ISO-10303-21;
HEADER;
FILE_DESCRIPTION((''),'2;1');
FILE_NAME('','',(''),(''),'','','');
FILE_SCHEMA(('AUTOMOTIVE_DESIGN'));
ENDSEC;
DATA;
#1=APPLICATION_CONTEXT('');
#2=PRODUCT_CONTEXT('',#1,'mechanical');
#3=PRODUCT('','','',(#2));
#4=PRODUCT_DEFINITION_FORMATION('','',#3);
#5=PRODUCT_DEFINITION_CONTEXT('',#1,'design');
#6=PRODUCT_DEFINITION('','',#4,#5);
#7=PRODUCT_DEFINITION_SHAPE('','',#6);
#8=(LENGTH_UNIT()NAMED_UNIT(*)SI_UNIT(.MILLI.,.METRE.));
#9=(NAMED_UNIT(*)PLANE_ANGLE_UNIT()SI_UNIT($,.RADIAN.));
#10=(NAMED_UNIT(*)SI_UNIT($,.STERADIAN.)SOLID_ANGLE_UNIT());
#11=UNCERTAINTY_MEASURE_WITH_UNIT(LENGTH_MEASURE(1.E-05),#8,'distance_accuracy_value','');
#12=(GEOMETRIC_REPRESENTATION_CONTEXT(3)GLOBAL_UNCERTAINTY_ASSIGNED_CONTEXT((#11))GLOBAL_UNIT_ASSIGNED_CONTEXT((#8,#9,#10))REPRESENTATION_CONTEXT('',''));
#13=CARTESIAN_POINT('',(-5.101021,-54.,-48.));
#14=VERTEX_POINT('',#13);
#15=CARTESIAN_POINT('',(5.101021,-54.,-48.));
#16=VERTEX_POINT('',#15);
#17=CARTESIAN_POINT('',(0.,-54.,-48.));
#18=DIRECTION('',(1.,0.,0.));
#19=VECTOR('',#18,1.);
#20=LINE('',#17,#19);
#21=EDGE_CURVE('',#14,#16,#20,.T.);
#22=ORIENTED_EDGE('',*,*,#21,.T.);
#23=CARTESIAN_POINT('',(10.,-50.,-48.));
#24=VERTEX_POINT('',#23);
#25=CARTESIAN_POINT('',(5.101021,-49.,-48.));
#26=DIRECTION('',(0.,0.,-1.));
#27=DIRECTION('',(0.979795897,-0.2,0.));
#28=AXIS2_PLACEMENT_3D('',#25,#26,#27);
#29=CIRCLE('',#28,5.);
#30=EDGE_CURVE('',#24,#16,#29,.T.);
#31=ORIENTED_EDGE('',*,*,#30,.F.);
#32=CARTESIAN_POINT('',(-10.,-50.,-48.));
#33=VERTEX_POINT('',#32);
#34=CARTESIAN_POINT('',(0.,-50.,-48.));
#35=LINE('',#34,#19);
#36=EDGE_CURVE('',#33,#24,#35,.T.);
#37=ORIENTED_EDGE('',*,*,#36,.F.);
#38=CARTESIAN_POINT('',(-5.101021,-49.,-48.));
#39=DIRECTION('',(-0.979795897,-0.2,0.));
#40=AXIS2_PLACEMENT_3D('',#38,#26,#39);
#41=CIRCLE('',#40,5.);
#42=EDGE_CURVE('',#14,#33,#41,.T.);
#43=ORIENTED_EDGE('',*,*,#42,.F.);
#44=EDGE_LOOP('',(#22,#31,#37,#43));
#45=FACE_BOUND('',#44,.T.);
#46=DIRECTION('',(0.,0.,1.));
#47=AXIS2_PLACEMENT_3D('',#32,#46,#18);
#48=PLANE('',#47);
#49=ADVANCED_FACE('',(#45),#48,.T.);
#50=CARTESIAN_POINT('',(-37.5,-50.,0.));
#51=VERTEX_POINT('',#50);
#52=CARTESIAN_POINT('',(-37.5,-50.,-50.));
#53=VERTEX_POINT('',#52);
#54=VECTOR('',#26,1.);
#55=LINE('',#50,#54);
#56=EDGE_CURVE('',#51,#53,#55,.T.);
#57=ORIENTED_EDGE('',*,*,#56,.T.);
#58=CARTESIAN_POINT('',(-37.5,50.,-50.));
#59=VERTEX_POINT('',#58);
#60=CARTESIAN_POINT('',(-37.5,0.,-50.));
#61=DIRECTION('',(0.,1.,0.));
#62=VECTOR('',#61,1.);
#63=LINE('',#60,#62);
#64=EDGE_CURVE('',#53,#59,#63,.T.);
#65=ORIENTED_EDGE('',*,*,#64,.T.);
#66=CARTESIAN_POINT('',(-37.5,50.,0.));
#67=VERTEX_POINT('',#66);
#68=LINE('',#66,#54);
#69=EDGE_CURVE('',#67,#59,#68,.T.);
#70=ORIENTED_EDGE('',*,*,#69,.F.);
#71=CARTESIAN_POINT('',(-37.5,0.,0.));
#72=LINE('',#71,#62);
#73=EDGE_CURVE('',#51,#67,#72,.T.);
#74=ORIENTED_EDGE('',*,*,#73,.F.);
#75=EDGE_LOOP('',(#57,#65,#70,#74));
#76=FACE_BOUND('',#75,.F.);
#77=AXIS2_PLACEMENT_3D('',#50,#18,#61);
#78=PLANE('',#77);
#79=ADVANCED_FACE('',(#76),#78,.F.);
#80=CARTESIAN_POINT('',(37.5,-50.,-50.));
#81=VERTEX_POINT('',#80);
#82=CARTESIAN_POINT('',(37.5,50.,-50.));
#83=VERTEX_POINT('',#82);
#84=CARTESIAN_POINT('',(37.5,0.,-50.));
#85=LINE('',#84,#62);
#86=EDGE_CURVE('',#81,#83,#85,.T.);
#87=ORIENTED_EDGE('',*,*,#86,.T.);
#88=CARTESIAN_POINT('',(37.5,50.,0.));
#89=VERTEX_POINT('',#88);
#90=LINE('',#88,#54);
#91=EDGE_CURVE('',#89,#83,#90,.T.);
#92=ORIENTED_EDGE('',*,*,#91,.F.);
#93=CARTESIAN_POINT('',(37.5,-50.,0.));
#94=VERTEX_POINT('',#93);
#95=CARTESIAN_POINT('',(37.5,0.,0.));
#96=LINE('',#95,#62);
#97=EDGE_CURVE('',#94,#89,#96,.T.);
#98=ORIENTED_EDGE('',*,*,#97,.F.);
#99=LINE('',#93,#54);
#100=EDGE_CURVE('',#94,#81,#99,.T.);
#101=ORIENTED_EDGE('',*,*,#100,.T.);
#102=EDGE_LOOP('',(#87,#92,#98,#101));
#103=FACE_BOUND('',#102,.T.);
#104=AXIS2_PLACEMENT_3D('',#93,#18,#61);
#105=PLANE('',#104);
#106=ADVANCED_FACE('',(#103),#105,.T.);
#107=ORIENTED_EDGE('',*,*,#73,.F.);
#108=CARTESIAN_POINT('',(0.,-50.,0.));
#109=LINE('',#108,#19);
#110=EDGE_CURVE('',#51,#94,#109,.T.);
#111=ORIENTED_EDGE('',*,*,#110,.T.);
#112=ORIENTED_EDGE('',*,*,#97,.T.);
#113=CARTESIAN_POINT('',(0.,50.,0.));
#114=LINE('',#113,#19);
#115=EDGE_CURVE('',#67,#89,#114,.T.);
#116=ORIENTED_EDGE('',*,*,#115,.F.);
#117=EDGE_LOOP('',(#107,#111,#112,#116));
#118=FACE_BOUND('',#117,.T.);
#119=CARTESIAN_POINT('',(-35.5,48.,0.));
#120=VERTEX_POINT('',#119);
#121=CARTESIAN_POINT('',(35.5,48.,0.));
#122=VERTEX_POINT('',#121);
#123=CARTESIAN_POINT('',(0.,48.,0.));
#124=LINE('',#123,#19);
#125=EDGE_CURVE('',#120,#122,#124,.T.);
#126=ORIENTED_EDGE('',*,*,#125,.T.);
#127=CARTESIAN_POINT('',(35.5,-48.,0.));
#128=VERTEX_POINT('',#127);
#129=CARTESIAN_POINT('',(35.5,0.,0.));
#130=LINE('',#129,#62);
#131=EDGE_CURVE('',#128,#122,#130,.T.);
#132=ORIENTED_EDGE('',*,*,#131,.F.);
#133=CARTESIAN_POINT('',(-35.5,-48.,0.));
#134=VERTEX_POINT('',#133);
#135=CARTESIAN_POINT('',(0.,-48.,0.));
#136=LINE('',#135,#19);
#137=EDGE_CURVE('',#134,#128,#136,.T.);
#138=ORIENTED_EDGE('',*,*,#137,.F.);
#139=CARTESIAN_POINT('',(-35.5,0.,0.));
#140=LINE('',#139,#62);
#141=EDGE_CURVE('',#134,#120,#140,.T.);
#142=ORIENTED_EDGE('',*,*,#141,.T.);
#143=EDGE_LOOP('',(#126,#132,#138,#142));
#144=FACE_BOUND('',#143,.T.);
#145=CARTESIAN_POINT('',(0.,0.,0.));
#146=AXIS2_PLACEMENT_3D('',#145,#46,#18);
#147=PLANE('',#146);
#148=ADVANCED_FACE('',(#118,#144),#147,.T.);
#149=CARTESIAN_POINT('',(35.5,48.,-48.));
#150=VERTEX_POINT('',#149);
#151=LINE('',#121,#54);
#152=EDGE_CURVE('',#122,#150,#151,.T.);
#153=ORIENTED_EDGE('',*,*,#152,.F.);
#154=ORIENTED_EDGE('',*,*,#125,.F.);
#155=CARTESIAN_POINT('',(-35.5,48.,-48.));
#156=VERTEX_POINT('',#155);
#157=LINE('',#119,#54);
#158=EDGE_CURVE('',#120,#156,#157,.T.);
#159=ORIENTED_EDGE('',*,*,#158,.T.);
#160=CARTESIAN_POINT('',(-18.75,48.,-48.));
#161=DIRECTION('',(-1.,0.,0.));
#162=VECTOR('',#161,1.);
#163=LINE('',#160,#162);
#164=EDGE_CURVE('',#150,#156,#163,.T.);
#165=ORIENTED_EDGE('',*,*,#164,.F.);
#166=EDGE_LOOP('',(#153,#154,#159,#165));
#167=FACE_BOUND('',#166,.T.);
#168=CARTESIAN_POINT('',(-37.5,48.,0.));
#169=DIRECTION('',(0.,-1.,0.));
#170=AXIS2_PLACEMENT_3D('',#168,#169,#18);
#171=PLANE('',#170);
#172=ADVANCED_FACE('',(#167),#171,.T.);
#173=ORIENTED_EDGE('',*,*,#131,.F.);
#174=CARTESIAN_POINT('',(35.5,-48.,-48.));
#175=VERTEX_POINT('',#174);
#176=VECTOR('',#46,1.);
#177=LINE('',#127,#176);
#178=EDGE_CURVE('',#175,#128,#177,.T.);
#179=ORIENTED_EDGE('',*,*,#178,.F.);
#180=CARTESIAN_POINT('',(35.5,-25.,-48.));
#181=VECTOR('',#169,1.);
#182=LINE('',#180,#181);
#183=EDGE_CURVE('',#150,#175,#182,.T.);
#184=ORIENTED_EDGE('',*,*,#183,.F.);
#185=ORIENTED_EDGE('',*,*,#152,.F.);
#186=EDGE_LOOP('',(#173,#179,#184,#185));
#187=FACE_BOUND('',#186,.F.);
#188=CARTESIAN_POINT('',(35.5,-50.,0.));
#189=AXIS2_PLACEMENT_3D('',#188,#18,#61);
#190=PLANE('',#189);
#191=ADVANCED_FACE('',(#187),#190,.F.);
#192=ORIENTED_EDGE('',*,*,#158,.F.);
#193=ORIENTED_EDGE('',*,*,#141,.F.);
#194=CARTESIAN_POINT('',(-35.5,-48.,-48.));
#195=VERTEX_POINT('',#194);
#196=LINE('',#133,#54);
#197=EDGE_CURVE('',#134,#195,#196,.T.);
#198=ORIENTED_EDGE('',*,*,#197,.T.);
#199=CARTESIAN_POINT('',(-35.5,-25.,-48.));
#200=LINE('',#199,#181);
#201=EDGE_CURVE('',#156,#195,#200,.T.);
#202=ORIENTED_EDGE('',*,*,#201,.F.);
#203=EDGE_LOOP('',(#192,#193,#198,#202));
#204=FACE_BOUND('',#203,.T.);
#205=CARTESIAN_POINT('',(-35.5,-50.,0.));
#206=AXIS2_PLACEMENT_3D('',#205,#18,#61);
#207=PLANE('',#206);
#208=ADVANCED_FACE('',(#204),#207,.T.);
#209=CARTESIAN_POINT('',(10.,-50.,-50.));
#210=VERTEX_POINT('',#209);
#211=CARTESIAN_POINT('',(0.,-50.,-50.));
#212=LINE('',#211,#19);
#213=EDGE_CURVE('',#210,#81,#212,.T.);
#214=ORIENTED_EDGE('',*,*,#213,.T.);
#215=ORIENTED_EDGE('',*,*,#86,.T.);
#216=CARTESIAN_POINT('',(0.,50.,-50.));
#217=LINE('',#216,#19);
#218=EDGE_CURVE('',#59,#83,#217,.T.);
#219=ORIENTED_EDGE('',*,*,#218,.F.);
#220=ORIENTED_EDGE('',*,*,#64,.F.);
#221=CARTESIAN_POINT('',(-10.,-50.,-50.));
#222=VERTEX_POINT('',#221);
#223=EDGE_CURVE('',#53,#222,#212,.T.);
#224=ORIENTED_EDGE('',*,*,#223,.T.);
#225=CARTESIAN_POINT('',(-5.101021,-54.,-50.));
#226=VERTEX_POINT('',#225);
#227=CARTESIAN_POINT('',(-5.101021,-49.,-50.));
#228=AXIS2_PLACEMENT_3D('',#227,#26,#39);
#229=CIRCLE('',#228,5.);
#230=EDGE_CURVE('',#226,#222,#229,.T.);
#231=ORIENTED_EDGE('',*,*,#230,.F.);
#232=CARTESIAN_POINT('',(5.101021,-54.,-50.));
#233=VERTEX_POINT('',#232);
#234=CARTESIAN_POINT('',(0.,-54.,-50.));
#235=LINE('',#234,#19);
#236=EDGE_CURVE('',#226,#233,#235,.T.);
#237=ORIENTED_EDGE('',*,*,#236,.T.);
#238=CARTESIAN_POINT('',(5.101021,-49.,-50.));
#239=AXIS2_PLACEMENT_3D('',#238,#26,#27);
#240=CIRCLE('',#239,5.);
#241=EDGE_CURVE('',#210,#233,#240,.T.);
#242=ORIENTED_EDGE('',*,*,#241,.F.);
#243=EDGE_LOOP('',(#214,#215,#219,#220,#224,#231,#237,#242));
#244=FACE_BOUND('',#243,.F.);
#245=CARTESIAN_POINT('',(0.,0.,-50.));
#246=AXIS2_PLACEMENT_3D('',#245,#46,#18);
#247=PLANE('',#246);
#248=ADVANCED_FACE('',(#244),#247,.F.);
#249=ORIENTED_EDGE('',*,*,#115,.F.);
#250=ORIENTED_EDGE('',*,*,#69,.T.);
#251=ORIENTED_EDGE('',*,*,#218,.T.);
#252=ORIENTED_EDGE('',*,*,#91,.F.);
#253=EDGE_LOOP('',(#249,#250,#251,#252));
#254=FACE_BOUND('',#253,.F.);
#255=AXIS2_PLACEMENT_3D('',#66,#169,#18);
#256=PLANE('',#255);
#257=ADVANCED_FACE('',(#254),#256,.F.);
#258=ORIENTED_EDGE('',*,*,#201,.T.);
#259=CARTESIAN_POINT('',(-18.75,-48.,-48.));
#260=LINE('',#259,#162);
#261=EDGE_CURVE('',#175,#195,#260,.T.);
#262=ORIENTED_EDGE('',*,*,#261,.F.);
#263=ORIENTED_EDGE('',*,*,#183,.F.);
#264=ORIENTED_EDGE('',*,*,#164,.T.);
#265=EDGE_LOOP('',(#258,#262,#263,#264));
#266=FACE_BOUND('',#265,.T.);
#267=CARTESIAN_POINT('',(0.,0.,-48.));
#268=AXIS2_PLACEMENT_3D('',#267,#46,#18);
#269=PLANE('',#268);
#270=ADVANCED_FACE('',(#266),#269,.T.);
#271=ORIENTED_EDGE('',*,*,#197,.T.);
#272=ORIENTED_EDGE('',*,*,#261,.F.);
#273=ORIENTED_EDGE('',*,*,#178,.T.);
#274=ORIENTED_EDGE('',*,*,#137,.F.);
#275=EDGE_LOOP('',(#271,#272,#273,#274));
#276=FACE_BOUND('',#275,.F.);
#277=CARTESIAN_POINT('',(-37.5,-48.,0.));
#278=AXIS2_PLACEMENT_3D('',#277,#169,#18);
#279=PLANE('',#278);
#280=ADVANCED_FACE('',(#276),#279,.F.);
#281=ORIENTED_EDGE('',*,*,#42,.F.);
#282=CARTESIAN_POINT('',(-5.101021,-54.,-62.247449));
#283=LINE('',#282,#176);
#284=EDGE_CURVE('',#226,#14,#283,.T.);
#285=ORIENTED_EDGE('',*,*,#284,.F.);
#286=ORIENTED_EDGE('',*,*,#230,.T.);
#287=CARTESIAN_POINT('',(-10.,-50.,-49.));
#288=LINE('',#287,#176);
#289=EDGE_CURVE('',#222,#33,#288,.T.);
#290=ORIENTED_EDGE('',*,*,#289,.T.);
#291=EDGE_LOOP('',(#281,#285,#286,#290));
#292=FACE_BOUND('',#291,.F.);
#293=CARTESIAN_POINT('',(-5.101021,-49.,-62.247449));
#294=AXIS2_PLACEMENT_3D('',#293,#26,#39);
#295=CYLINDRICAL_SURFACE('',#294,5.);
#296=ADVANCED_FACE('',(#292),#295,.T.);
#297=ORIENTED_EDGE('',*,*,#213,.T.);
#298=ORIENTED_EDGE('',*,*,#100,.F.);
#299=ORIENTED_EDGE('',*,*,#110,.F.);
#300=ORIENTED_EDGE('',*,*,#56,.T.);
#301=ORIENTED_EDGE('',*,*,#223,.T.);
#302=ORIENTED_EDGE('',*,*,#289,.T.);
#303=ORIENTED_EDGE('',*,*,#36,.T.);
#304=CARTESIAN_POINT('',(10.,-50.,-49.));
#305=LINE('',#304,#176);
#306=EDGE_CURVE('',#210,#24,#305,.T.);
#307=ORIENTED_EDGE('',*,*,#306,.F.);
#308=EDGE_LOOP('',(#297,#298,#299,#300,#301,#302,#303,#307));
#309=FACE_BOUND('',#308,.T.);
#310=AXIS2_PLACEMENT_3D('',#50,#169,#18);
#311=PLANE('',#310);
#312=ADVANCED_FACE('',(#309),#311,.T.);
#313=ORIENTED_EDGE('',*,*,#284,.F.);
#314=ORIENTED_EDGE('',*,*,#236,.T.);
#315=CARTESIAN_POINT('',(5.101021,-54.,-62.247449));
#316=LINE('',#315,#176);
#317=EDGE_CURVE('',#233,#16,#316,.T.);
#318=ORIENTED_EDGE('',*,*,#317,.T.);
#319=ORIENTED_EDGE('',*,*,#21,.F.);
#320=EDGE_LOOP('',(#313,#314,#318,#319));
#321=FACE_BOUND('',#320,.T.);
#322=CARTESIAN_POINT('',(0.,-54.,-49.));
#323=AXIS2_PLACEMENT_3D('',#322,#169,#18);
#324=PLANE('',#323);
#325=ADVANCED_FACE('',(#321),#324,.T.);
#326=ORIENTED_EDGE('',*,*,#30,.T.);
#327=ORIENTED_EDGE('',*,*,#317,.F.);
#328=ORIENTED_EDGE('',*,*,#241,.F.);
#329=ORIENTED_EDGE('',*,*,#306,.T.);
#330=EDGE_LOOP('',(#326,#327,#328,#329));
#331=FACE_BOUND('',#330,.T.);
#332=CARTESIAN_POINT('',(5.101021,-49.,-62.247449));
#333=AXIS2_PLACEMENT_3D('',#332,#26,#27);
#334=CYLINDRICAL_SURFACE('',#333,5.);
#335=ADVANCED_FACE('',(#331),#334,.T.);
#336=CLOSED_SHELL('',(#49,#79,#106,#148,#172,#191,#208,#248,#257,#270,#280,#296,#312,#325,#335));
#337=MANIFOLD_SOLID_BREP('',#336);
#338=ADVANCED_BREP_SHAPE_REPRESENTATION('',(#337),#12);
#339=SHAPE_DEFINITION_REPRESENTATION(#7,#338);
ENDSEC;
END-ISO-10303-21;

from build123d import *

# Parameters (mm, degrees)
F2_W        = 75
F2_H        = 100
F3_DEPTH    = 50
F4_T        = -2
F5_W        = 20
F5_H        = 2
F6_DEPTH    = 4
F7_T1_DEPTH = 26.4948974279


# Not quite as in the source:
# - a fillet or chamfer that OpenCascade refuses, or shapes differently, is made with other operations: its cross-section is extruded or revolved along the edge and cut away or added


with BuildPart() as f3:
    # F2 (on Top) → F3 (new body)
    with BuildSketch(Plane.XY):
        Rectangle(F2_W, F2_H)
    extrude(amount=-F3_DEPTH)

    # F4
    f4_openings = [f3.faces().sort_by_distance(p)[0] for p in [
        (0, 0, 0),
    ]]
    offset(amount=F4_T, openings=f4_openings)

    # F5 (on face) → F6 (join)
    with BuildSketch(Plane.XZ.offset(50)):
        with Locations((0, -49)):
            Rectangle(F5_W, F5_H)
    extrude(amount=F6_DEPTH)

    # F7: fillet of radius 5 on 2 edges, made by hand

    # F7_s2 → F7_t1 (cut)
    with BuildSketch(Plane.XY.offset(-62.2474487139)):
        with BuildLine():
            ThreePointArc((10, -50), (8.2632981746, -52.8729833462), (5.1010205144, -54))
            Line((5.1010205144, -54), (10, -54))
            Line((10, -54), (10, -50))
        make_face()
        with BuildLine():
            ThreePointArc((-10, -50), (-8.2632981746, -52.8729833462), (-5.1010205144, -54))
            Line((-5.1010205144, -54), (-10, -54))
            Line((-10, -54), (-10, -50))
        make_face()
    extrude(amount=F7_T1_DEPTH, mode=Mode.SUBTRACT)


solid = f3.part
